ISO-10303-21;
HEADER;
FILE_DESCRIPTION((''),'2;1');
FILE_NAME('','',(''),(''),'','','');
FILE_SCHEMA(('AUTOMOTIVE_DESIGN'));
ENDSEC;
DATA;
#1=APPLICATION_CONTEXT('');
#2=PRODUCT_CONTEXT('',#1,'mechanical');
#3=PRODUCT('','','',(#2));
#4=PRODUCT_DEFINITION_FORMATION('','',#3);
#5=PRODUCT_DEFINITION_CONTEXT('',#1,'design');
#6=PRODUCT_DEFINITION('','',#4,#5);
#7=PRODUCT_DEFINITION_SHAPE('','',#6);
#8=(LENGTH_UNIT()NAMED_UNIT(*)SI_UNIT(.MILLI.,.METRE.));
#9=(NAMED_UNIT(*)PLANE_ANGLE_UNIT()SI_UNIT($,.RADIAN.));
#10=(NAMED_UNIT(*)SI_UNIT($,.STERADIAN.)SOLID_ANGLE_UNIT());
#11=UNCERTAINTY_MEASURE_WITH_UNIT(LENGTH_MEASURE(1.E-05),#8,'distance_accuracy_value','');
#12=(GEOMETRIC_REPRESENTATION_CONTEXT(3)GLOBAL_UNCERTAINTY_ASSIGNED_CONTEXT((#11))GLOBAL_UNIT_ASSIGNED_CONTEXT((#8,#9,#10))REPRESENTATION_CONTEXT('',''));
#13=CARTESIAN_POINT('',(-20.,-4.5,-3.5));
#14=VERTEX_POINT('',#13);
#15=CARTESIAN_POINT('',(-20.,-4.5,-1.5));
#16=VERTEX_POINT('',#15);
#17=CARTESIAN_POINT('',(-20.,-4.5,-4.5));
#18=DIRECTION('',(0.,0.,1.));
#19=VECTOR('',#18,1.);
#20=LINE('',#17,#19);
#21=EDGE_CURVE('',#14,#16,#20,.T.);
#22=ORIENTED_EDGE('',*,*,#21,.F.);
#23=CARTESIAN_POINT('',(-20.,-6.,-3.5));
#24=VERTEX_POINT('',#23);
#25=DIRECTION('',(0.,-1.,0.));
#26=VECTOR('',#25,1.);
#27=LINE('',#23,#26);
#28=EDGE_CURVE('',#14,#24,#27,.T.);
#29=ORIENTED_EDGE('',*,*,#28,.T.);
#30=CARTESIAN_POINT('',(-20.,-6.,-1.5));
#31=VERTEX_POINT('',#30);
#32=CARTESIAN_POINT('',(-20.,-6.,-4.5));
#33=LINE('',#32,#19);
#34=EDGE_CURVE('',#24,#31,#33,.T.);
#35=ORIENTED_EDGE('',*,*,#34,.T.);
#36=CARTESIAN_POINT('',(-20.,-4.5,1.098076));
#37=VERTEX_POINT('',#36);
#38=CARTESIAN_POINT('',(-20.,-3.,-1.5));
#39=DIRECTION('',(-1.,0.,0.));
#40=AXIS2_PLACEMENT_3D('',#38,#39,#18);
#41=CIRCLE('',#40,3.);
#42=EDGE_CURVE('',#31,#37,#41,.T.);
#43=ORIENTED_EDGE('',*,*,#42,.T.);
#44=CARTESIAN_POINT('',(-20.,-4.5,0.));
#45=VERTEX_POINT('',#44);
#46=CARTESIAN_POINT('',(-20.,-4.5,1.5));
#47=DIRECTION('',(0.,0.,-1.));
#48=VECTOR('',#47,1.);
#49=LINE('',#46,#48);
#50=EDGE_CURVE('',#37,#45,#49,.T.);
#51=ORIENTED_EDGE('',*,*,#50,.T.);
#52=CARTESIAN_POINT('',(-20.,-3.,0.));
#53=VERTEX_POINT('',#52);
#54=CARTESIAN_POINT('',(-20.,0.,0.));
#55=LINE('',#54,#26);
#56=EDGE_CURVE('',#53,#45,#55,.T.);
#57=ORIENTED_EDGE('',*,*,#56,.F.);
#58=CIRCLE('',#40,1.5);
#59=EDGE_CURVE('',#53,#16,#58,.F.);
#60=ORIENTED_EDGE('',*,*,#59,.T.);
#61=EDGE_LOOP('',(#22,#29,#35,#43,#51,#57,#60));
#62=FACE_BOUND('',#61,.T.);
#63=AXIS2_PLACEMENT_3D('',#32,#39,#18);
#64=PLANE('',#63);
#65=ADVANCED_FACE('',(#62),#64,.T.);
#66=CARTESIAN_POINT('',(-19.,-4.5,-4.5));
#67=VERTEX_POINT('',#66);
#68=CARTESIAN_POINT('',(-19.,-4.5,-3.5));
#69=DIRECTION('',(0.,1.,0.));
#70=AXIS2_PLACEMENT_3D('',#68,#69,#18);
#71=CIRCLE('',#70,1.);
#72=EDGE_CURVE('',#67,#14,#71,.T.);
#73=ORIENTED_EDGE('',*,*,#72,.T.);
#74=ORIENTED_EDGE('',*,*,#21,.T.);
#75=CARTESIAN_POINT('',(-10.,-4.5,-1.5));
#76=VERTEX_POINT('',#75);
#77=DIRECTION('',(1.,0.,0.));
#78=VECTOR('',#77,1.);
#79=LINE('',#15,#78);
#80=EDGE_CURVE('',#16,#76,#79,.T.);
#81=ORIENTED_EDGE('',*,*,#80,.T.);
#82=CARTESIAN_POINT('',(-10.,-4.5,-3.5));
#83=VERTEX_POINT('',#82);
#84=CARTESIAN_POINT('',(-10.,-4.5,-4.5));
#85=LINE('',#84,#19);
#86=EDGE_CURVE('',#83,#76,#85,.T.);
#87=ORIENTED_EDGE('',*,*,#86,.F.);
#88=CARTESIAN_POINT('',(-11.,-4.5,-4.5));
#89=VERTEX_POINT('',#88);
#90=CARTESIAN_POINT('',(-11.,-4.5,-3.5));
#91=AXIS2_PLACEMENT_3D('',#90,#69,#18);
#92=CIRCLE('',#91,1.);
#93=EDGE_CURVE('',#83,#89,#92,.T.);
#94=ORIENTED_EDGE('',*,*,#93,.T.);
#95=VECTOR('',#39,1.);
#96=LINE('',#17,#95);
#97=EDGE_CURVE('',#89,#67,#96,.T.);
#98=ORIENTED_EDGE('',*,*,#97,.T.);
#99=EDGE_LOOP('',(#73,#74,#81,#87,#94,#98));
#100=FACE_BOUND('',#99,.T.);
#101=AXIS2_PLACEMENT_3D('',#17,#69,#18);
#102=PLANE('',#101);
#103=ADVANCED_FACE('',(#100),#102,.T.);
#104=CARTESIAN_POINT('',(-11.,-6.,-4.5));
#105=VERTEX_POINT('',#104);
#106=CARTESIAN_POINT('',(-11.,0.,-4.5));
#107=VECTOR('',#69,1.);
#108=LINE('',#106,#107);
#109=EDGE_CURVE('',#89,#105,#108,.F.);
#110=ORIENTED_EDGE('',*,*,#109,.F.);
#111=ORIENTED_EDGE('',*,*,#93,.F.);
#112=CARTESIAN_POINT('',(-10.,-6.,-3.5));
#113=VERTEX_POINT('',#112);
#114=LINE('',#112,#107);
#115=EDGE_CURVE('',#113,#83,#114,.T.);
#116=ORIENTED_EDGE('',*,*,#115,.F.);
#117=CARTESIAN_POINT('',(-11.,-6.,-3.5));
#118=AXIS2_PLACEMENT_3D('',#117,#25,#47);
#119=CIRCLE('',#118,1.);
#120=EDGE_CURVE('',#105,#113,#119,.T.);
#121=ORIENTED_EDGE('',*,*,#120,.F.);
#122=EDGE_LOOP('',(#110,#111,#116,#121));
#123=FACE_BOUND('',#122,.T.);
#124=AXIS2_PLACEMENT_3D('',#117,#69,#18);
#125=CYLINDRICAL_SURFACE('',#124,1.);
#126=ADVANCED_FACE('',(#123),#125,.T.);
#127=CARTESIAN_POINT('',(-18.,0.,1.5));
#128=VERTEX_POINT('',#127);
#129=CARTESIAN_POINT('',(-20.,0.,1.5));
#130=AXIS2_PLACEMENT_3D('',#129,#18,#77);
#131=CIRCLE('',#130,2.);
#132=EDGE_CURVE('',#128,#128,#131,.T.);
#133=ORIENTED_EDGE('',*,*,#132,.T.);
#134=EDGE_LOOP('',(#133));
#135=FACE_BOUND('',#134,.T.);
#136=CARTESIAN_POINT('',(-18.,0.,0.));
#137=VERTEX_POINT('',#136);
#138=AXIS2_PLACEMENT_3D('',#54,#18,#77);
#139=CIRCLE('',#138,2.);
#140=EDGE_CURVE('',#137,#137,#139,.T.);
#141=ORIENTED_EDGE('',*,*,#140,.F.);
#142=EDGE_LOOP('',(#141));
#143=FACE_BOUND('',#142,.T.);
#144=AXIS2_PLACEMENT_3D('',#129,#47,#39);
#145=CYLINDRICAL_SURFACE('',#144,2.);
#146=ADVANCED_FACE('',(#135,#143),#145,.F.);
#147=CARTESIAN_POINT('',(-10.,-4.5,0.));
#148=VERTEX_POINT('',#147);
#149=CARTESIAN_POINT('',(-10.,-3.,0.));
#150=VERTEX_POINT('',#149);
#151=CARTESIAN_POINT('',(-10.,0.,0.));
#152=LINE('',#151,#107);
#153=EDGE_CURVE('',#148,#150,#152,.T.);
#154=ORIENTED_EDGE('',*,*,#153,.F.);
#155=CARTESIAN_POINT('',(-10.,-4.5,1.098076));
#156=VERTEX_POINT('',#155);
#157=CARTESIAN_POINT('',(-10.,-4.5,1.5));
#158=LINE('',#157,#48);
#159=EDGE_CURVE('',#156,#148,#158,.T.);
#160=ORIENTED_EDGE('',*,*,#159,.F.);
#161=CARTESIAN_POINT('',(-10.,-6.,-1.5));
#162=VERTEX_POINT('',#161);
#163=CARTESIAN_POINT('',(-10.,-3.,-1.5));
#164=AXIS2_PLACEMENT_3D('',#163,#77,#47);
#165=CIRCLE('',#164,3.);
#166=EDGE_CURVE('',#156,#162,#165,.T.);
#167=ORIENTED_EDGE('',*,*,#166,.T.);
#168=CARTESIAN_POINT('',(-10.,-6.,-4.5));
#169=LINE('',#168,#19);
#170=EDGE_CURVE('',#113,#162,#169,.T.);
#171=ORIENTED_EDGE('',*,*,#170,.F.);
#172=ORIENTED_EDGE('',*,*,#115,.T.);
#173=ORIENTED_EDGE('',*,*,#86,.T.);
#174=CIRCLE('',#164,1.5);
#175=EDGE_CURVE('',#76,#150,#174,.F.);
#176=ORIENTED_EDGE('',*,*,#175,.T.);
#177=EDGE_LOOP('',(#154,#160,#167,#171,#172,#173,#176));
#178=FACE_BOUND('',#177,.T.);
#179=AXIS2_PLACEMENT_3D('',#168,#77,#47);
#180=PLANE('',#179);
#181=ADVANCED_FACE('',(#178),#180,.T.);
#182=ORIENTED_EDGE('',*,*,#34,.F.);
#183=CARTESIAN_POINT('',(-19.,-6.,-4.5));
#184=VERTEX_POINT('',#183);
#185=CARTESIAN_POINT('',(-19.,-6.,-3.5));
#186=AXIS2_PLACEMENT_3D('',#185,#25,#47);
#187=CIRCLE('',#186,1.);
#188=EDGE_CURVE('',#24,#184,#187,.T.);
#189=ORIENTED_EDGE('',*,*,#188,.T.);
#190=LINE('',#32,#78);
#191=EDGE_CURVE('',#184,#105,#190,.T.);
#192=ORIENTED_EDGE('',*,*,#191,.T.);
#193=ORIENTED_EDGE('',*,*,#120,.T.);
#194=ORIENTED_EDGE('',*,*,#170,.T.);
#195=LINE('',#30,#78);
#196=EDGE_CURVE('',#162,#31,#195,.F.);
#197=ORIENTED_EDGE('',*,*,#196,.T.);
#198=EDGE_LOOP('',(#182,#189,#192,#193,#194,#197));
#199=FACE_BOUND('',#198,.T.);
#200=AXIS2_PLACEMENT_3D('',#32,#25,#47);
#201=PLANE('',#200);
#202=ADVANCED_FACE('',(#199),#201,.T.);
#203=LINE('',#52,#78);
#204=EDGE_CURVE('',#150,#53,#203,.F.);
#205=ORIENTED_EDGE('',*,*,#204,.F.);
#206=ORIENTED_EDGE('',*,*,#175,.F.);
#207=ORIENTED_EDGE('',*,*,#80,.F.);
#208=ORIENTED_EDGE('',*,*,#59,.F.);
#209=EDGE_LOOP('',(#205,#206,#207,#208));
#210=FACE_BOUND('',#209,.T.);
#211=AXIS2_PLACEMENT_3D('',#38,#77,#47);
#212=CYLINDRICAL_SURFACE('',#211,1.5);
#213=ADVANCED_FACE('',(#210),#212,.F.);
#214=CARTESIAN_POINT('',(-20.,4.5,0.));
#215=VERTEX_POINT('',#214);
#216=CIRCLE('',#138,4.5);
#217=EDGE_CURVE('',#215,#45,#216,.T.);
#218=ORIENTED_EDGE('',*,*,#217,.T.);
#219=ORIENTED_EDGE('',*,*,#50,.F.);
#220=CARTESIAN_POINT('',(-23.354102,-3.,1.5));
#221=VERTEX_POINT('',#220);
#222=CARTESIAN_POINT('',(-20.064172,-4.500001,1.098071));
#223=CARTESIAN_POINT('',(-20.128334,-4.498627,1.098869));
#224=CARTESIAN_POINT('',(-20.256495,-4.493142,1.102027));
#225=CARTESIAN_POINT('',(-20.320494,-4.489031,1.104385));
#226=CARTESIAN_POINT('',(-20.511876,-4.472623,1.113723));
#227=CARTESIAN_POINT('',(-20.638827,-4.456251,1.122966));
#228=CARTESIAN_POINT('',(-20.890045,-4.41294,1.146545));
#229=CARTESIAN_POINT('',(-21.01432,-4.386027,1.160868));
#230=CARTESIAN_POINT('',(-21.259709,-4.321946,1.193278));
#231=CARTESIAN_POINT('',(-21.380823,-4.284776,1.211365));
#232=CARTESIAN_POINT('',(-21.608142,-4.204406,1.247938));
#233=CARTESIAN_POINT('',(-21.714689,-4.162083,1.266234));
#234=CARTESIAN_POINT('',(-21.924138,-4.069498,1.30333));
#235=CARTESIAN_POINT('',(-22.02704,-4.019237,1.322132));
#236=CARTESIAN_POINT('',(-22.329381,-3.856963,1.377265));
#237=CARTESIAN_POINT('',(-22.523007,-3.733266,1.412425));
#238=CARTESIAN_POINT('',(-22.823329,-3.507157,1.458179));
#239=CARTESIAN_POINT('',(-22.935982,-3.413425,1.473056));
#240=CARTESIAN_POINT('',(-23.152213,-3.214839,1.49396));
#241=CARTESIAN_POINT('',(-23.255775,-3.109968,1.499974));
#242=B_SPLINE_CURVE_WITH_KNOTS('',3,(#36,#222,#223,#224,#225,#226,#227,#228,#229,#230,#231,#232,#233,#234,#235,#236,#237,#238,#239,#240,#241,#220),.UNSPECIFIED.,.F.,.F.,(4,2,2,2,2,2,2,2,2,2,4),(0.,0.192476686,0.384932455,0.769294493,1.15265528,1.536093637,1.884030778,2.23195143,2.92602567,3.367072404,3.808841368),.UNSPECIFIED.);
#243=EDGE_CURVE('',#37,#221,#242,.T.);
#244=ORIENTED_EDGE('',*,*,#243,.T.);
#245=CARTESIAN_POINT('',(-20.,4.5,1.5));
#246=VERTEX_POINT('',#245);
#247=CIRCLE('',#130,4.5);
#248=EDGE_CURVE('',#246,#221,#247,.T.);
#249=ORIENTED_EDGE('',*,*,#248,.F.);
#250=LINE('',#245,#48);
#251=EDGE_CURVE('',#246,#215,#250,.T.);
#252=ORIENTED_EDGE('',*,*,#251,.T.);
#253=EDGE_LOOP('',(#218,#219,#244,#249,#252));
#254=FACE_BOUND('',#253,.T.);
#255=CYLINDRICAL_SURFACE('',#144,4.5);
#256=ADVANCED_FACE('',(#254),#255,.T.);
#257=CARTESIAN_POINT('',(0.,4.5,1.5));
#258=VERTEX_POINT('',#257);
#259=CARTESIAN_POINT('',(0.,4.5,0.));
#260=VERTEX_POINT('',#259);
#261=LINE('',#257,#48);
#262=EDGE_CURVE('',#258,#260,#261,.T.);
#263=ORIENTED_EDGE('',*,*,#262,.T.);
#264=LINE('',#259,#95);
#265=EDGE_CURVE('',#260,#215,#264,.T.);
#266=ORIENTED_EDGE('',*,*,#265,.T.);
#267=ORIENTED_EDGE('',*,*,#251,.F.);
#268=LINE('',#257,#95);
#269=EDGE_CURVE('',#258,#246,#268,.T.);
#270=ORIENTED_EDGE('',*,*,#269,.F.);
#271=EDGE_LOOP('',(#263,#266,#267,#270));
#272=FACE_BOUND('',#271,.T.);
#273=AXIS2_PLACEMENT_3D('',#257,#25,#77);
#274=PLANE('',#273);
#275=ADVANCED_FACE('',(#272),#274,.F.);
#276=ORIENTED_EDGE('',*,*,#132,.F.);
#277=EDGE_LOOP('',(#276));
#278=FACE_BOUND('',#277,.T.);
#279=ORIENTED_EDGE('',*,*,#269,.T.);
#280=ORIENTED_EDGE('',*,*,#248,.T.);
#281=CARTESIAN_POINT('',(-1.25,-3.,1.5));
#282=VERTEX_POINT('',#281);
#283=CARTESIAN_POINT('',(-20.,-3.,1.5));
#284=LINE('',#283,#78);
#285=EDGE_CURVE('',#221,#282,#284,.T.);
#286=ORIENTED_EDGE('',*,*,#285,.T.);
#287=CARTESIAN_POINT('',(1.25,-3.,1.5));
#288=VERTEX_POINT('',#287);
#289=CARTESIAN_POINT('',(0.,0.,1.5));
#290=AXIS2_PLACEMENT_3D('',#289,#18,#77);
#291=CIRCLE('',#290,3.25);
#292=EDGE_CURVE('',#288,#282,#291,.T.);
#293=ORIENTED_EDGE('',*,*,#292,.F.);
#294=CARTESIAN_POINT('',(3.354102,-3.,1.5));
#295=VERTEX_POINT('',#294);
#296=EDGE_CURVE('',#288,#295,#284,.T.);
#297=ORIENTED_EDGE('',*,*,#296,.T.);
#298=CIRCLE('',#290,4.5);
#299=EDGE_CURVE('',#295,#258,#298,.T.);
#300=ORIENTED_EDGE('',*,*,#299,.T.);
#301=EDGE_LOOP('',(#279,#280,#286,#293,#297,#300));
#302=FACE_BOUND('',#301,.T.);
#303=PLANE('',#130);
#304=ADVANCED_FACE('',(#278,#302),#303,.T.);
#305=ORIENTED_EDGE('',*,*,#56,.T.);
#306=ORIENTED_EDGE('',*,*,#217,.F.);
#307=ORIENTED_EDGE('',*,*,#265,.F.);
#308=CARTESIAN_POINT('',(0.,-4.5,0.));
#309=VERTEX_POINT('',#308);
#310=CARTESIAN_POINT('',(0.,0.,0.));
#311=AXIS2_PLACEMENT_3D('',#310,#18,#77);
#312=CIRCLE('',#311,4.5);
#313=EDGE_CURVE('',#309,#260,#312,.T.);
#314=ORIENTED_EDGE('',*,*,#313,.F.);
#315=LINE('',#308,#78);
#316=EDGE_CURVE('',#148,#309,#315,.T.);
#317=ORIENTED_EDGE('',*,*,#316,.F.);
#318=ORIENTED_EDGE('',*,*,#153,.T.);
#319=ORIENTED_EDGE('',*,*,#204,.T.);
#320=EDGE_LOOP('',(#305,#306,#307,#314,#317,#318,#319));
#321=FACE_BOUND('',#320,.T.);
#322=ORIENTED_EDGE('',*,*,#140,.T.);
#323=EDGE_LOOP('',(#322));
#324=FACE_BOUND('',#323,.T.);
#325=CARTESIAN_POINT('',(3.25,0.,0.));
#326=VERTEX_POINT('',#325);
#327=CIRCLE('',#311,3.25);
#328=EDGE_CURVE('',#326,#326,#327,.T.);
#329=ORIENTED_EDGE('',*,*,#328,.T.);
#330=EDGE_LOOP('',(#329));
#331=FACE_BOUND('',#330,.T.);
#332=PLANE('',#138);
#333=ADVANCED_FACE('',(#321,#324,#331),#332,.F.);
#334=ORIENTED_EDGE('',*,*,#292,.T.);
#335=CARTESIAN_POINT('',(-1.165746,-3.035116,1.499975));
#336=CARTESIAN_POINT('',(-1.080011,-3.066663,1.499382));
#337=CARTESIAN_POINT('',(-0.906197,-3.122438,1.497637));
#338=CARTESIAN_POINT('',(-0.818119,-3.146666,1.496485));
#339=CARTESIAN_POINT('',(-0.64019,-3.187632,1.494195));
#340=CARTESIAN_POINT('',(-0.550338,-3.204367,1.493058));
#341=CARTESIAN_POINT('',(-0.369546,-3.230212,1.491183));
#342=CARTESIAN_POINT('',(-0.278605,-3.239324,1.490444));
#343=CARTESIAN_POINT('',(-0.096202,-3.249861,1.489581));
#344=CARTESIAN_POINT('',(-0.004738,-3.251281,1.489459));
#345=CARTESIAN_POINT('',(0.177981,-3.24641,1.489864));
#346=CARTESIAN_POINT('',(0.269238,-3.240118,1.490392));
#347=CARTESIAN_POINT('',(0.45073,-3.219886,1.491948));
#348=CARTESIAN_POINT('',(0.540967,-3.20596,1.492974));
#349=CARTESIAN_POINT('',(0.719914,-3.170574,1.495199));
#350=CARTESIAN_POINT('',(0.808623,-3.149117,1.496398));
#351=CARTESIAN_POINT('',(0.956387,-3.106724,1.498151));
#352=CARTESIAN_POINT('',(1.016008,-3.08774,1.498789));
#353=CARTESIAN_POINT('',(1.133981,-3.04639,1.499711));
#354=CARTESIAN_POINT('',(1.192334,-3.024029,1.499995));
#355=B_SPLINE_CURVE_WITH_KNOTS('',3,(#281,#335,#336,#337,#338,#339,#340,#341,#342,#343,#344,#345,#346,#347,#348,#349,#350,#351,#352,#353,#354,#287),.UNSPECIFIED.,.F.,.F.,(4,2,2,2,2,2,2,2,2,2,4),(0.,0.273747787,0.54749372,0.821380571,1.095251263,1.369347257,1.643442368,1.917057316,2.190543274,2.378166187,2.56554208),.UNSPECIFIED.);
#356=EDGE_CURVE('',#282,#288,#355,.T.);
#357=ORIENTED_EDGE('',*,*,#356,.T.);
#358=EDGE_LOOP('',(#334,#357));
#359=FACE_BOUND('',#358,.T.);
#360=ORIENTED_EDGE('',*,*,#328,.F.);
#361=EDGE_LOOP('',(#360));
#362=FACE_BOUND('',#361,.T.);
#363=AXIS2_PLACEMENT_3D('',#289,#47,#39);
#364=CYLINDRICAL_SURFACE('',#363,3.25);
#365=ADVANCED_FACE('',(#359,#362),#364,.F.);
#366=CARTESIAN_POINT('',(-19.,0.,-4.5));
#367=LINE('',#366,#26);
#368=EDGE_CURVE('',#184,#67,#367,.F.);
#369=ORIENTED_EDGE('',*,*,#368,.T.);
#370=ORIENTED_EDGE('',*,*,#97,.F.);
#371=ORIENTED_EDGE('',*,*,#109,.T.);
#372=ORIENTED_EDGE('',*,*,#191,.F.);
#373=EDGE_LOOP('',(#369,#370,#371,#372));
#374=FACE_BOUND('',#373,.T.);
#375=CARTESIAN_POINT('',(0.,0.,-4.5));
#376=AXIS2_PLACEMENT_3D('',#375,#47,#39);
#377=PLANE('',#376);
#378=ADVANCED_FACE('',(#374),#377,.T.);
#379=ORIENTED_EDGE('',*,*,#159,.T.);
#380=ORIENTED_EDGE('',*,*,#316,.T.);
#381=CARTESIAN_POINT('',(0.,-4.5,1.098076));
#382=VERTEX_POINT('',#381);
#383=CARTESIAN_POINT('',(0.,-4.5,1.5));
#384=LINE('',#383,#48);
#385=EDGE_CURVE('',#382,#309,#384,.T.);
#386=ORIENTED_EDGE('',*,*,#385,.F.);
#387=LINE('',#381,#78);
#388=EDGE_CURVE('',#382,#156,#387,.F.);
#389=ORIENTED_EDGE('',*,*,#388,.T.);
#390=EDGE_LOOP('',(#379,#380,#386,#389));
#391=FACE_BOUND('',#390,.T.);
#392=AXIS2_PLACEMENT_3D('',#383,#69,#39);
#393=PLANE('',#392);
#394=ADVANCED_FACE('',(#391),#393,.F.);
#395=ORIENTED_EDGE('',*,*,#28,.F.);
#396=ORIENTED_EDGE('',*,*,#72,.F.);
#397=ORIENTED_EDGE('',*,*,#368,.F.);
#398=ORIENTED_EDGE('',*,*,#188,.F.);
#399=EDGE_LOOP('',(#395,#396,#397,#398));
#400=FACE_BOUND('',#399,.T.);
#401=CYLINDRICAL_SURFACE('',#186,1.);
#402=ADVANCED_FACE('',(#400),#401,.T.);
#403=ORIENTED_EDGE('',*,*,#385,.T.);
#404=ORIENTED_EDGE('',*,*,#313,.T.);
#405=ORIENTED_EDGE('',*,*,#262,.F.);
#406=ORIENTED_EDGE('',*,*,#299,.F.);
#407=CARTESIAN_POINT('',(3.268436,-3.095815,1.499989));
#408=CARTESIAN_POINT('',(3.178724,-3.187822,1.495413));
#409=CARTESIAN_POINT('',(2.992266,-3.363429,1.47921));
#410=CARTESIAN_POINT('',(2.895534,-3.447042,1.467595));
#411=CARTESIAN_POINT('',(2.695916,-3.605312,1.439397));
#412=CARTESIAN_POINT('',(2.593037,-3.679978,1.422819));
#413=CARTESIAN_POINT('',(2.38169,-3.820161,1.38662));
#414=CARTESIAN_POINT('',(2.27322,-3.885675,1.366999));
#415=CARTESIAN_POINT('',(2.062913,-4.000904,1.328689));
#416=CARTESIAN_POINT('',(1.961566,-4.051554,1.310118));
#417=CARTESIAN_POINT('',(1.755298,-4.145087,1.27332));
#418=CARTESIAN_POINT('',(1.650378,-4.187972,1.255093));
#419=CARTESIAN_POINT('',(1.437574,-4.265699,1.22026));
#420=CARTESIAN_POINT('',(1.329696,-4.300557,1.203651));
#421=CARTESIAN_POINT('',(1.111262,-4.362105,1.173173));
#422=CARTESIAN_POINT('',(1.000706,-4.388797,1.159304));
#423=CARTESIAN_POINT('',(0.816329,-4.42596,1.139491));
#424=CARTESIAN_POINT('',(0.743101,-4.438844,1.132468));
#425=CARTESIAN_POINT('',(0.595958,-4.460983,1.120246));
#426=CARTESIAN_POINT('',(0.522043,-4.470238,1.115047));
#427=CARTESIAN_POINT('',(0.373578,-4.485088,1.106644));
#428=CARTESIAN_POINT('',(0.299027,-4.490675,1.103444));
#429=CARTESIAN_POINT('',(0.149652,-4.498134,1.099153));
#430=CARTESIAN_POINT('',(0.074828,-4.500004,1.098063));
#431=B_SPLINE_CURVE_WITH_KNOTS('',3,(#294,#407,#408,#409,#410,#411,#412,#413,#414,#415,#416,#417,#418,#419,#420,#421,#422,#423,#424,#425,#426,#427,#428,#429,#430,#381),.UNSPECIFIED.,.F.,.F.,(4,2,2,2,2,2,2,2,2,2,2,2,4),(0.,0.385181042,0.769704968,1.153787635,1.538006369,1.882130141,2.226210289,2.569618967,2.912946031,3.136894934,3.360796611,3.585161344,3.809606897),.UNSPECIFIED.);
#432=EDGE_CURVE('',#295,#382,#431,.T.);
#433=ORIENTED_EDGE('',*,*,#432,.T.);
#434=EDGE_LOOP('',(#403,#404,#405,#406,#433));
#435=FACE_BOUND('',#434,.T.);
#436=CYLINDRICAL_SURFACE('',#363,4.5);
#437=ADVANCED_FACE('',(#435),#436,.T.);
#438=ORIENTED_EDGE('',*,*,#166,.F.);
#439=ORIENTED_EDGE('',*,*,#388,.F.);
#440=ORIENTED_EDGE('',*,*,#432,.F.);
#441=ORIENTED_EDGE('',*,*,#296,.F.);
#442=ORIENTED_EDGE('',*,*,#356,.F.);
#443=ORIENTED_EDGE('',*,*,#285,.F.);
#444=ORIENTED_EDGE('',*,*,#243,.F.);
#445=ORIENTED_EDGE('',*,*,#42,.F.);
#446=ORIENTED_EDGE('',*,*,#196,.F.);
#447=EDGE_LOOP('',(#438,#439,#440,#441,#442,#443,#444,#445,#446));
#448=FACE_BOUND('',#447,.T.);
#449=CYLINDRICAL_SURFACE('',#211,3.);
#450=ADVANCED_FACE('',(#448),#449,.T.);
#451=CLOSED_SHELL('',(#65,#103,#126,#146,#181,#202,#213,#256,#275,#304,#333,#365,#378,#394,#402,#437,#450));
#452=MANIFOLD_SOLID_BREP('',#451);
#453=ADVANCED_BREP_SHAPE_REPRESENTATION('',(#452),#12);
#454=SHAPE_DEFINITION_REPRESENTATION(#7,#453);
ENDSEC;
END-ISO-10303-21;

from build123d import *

# Parameters (mm, degrees)
ESQUISSE1_R        = 3.25
ESQUISSE1_R_2      = 2
BOSS_EXTRU_1_DEPTH = 1.5
ESQUISSE2_W        = 10
ESQUISSE2_H        = 1.5
BOSS_EXTRU_2_DEPTH = 6
CONG_1_START       = -20
CONG_1_DEPTH       = 10
CONG_1_START_2     = -6
CONG_1_2_DEPTH     = 1.5
CONG_1_START_3     = -24.5
CONG_1_3_DEPTH     = 29


with BuildPart() as part:
    # Esquisse1 → Boss.-Extru.1 (new body)
    with BuildSketch(Plane.XY):
        with BuildLine():
            Line((0, -4.5), (-20, -4.5))
            ThreePointArc((-20, -4.5), (-24.5, 0), (-20, 4.5))
            Line((-20, 4.5), (0, 4.5))
            ThreePointArc((0, 4.5), (4.5, 0), (0, -4.5))
        make_face()
        Circle(ESQUISSE1_R, mode=Mode.SUBTRACT)
        with Locations((-20, 0)):
            Circle(ESQUISSE1_R_2, mode=Mode.SUBTRACT)
    extrude(amount=BOSS_EXTRU_1_DEPTH)

    # Esquisse2 → Boss.-Extru.2 (add)
    with BuildSketch(Plane.XY.offset(1.5)):
        with Locations((-15, -5.25)):
            Rectangle(ESQUISSE2_W, ESQUISSE2_H)
    extrude(amount=-BOSS_EXTRU_2_DEPTH)

    # Congé1: read off the stored shape, not the designer's step
    # Congé1 outline → Congé1 (add)
    with BuildSketch(Plane.YZ.offset(CONG_1_START)):
        with BuildLine():
            ThreePointArc((-4.5, -1.5), (-4.060660172, -0.439339828), (-3, 0))
            Line((-3, 0), (-4.5, 0))
            Line((-4.5, 0), (-4.5, -1.5))
        make_face()
    extrude(amount=CONG_1_DEPTH)

    # Cong_1 2 outline → Cong_1 2 (cut)
    with BuildSketch(Plane(origin=(0, 0, 0), x_dir=(1, 0, 0), z_dir=(0, 1, 0)).offset(CONG_1_START_2)):
        with BuildLine():
            ThreePointArc((-20, 3.5), (-19.707106781, 4.207106781), (-19, 4.5))
            Line((-19, 4.5), (-20, 4.5))
            Line((-20, 4.5), (-20, 3.5))
        make_face()
        with BuildLine():
            ThreePointArc((-11, 4.5), (-10.292893219, 4.207106781), (-10, 3.5))
            Line((-10, 3.5), (-10, 4.5))
            Line((-10, 4.5), (-11, 4.5))
        make_face()
    extrude(amount=CONG_1_2_DEPTH, mode=Mode.SUBTRACT)

    # Cong_1 3 outline → Cong_1 3 (cut)
    with BuildSketch(Plane.YZ.offset(CONG_1_START_3)):
        with BuildLine():
            ThreePointArc((-6, -1.5), (-5.121320344, 0.621320344), (-3, 1.5))
            Line((-3, 1.5), (-6, 1.5))
            Line((-6, 1.5), (-6, -1.5))
        make_face()
    extrude(amount=CONG_1_3_DEPTH, mode=Mode.SUBTRACT)


solid = part.part
